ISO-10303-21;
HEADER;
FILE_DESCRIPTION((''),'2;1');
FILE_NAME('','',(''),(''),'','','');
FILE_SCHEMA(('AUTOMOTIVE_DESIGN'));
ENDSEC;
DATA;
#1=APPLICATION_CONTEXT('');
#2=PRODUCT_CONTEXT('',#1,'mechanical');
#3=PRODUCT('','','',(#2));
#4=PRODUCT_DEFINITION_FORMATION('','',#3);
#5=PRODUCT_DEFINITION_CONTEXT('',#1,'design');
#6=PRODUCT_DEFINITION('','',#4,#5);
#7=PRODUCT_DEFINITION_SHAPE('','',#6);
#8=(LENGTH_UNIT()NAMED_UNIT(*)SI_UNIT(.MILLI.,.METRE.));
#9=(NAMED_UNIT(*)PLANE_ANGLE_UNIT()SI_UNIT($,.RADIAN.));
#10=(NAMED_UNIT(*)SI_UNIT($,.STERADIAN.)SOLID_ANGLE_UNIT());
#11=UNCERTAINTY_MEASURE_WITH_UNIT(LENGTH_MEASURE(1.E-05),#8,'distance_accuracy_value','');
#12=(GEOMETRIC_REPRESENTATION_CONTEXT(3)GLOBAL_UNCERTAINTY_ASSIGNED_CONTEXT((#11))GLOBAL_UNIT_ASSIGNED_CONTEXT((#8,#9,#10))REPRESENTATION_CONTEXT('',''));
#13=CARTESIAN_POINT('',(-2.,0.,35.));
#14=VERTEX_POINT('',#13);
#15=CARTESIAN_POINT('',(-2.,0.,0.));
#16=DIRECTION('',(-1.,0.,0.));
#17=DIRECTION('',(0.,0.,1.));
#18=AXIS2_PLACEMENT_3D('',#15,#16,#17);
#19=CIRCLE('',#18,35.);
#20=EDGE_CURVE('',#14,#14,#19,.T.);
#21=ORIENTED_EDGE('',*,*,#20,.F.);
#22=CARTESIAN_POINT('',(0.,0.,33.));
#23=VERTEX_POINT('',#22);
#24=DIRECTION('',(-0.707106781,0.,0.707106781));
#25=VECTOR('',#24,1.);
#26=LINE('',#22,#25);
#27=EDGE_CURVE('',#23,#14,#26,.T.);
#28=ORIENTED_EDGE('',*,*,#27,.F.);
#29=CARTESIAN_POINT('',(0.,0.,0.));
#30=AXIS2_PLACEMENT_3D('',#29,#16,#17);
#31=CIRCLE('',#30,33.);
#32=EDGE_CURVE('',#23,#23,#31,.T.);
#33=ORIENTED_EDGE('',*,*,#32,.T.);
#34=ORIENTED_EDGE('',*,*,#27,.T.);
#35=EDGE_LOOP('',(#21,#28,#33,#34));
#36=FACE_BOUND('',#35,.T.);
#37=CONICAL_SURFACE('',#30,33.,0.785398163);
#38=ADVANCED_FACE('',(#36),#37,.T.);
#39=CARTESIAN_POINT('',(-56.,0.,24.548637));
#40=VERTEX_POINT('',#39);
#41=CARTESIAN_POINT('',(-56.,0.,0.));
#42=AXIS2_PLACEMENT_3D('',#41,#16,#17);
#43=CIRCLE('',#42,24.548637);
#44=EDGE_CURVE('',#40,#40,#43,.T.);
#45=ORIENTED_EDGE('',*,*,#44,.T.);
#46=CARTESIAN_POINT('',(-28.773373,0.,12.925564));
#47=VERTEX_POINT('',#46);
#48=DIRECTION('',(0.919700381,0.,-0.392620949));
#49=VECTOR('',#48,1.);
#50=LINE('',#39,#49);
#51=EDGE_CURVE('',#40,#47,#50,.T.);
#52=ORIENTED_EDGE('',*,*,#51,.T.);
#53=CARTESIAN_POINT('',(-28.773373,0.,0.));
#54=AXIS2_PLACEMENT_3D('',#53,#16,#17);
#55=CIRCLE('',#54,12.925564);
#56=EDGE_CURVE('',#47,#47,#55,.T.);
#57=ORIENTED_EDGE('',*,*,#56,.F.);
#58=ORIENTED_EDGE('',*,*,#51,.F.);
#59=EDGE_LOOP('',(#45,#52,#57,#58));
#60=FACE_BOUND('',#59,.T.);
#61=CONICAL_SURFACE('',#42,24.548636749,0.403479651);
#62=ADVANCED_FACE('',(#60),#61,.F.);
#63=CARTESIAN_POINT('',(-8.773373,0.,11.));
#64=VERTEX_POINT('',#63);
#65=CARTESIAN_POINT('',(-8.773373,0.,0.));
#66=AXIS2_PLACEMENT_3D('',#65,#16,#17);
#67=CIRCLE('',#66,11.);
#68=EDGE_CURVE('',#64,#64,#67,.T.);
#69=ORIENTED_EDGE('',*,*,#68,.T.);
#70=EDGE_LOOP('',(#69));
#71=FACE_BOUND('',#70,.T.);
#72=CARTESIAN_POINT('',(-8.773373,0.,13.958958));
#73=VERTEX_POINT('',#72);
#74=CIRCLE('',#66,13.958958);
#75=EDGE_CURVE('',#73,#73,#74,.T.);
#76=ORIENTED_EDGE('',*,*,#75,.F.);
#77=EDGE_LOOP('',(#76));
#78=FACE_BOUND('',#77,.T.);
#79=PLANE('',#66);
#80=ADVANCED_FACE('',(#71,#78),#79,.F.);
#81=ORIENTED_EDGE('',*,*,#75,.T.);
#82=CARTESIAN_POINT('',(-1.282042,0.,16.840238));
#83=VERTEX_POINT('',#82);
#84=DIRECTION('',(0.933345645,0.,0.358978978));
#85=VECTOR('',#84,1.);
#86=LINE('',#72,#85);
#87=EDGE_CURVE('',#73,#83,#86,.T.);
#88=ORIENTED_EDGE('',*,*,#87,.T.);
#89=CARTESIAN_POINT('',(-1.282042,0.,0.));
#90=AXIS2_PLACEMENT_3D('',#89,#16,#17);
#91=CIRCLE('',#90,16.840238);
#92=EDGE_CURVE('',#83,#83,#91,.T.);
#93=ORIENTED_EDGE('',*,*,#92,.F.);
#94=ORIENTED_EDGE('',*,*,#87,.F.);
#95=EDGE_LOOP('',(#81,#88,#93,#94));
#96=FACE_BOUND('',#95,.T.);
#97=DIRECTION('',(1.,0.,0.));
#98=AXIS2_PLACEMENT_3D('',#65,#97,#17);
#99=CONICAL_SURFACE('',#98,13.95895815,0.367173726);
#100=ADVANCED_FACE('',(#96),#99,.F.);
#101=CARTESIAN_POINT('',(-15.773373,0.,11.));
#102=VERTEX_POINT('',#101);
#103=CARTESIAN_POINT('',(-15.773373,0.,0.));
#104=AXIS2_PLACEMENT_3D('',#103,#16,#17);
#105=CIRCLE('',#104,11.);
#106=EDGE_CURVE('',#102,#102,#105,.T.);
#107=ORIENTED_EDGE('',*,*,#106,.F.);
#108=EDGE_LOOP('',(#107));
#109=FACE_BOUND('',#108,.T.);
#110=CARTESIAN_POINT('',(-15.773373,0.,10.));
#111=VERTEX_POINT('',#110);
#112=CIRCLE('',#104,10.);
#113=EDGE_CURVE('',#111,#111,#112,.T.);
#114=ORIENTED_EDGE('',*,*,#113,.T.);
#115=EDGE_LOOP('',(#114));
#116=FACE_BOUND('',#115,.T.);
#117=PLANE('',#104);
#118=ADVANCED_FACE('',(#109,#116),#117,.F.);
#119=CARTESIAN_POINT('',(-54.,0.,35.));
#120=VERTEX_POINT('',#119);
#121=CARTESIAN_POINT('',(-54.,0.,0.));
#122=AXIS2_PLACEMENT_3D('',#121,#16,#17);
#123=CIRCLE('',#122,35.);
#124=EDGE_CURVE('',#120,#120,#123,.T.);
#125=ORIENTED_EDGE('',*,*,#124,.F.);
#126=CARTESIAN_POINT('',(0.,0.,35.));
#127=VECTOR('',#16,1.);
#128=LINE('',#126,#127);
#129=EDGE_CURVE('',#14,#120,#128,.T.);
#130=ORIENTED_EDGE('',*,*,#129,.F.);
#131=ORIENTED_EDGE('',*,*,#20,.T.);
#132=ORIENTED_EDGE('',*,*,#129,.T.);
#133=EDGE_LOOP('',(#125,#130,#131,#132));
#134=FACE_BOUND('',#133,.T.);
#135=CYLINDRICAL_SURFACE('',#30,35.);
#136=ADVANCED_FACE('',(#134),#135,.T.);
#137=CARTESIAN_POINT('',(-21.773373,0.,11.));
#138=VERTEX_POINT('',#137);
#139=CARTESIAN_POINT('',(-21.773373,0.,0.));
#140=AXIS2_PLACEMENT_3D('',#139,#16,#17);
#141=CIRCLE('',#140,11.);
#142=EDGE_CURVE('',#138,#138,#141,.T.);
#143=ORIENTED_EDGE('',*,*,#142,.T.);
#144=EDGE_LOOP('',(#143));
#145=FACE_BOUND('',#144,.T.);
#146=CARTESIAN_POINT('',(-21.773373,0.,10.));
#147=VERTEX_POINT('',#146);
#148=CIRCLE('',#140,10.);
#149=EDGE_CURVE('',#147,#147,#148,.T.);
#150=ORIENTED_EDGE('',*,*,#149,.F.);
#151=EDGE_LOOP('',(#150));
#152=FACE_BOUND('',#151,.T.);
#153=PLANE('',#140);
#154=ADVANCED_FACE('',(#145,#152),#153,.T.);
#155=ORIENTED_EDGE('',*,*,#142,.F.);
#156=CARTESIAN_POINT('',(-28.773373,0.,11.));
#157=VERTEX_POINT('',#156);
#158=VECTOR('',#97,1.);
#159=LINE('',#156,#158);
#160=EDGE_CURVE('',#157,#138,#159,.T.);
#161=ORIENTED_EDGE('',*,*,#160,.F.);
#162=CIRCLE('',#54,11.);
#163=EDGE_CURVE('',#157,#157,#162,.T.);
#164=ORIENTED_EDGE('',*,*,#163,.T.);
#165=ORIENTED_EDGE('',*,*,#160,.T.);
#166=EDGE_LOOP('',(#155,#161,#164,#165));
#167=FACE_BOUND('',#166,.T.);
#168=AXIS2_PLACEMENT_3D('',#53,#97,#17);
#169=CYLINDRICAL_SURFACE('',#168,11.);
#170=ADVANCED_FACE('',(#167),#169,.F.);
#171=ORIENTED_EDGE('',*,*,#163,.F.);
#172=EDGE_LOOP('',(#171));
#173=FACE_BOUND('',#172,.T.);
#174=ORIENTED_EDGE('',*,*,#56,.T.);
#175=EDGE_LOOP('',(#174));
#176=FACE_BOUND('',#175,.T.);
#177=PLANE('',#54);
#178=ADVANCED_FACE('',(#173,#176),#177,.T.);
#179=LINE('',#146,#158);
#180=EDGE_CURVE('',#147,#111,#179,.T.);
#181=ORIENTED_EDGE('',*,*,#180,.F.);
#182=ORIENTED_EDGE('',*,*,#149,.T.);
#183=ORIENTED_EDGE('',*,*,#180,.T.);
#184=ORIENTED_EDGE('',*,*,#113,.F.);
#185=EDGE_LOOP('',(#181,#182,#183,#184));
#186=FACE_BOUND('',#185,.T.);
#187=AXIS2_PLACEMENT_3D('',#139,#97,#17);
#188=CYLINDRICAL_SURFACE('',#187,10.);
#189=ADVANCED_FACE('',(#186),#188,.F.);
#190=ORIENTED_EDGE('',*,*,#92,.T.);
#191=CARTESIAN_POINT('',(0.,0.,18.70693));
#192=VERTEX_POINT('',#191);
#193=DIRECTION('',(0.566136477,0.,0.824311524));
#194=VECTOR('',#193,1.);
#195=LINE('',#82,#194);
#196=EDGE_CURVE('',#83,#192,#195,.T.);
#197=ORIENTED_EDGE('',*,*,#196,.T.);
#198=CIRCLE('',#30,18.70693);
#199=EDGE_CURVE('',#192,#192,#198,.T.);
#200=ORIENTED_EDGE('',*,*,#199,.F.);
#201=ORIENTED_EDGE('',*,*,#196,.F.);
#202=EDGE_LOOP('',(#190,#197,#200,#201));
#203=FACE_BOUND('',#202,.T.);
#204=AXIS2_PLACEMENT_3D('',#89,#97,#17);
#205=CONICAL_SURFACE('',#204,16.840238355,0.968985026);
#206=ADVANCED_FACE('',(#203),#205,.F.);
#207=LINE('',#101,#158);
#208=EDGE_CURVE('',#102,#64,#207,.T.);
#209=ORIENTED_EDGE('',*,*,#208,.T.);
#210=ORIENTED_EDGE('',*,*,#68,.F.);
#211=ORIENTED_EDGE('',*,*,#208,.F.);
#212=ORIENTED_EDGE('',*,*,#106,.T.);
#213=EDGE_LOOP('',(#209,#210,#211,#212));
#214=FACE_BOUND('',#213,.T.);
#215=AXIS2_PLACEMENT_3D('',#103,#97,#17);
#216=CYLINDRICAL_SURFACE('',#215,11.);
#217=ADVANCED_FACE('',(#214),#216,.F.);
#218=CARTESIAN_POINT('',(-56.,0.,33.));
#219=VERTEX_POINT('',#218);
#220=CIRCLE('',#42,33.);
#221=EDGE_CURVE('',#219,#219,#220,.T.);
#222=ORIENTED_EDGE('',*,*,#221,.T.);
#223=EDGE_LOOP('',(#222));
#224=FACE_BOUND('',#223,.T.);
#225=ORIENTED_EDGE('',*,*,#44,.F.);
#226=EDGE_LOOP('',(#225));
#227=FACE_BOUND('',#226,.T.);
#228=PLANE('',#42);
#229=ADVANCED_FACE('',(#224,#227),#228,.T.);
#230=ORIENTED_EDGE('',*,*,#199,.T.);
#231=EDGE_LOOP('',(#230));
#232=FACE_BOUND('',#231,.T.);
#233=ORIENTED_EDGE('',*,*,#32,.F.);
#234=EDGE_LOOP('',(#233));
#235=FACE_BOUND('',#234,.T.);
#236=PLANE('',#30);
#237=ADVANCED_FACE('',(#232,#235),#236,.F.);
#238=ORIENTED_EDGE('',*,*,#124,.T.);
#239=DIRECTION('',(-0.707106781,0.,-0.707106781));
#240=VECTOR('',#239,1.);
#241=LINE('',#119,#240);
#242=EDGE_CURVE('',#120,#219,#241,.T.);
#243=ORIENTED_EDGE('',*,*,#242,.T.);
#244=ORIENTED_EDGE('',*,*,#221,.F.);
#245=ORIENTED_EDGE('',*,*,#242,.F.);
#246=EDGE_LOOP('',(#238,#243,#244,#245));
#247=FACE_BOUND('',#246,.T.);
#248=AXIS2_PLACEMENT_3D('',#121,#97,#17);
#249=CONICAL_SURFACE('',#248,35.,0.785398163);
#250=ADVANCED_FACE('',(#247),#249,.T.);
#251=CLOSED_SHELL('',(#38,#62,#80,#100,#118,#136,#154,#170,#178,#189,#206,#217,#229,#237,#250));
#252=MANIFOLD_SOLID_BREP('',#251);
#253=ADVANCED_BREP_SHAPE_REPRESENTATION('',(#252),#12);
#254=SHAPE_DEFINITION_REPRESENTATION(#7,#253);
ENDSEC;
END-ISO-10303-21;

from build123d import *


# Not quite as in the source:
# - a fillet or chamfer that OpenCascade refuses, or shapes differently, is made with other operations: its cross-section is extruded or revolved along the edge and cut away or added


with BuildPart() as f1:
    # F0 (on Front) → F1 (revolve)
    with BuildSketch(Plane.XZ):
        Polygon((-15.7733729929, 11), (-8.7733729929, 11), (-8.7733729929, 13.9589581495), (0, 17.3333312895), (0, 35), (-56, 35), (-56, 24.5486367494), (-28.7733729929, 12.9255643114), (-28.7733729929, 11), (-21.7733729929, 11), (-21.7733729929, 10), (-15.7733729929, 10), align=None)
    revolve(axis=Axis((-19.2243028432, 0, 0), (-1, 0, 0)))

    # F2: chamfer of 2 on 3 edges, made by hand

    # F2_s1 → F2_t2 (revolve, cut)
    with BuildSketch(Plane.XZ):
        Polygon((0, 33), (-2, 35), (0, 35), align=None)
    revolve(axis=Axis((0, 0, 0), (-1, 0, 0)), mode=Mode.SUBTRACT)

    # F2_s3 → F2_t4 (revolve, cut)
    with BuildSketch(Plane.XZ):
        Polygon((-54, 35), (-56, 33), (-56, 35), align=None)
    revolve(axis=Axis((-56, 0, 0), (-1, 0, 0)), mode=Mode.SUBTRACT)

    # F2_s5 → F2_t6 (revolve, cut)
    with BuildSketch(Plane.XZ):
        Polygon((-1.2820420431, 16.840238355), (0, 18.706929645), (0, 17.3333312895), align=None)
    revolve(axis=Axis((0, 0, 0), (-1, 0, 0)), mode=Mode.SUBTRACT)


solid = f1.part
